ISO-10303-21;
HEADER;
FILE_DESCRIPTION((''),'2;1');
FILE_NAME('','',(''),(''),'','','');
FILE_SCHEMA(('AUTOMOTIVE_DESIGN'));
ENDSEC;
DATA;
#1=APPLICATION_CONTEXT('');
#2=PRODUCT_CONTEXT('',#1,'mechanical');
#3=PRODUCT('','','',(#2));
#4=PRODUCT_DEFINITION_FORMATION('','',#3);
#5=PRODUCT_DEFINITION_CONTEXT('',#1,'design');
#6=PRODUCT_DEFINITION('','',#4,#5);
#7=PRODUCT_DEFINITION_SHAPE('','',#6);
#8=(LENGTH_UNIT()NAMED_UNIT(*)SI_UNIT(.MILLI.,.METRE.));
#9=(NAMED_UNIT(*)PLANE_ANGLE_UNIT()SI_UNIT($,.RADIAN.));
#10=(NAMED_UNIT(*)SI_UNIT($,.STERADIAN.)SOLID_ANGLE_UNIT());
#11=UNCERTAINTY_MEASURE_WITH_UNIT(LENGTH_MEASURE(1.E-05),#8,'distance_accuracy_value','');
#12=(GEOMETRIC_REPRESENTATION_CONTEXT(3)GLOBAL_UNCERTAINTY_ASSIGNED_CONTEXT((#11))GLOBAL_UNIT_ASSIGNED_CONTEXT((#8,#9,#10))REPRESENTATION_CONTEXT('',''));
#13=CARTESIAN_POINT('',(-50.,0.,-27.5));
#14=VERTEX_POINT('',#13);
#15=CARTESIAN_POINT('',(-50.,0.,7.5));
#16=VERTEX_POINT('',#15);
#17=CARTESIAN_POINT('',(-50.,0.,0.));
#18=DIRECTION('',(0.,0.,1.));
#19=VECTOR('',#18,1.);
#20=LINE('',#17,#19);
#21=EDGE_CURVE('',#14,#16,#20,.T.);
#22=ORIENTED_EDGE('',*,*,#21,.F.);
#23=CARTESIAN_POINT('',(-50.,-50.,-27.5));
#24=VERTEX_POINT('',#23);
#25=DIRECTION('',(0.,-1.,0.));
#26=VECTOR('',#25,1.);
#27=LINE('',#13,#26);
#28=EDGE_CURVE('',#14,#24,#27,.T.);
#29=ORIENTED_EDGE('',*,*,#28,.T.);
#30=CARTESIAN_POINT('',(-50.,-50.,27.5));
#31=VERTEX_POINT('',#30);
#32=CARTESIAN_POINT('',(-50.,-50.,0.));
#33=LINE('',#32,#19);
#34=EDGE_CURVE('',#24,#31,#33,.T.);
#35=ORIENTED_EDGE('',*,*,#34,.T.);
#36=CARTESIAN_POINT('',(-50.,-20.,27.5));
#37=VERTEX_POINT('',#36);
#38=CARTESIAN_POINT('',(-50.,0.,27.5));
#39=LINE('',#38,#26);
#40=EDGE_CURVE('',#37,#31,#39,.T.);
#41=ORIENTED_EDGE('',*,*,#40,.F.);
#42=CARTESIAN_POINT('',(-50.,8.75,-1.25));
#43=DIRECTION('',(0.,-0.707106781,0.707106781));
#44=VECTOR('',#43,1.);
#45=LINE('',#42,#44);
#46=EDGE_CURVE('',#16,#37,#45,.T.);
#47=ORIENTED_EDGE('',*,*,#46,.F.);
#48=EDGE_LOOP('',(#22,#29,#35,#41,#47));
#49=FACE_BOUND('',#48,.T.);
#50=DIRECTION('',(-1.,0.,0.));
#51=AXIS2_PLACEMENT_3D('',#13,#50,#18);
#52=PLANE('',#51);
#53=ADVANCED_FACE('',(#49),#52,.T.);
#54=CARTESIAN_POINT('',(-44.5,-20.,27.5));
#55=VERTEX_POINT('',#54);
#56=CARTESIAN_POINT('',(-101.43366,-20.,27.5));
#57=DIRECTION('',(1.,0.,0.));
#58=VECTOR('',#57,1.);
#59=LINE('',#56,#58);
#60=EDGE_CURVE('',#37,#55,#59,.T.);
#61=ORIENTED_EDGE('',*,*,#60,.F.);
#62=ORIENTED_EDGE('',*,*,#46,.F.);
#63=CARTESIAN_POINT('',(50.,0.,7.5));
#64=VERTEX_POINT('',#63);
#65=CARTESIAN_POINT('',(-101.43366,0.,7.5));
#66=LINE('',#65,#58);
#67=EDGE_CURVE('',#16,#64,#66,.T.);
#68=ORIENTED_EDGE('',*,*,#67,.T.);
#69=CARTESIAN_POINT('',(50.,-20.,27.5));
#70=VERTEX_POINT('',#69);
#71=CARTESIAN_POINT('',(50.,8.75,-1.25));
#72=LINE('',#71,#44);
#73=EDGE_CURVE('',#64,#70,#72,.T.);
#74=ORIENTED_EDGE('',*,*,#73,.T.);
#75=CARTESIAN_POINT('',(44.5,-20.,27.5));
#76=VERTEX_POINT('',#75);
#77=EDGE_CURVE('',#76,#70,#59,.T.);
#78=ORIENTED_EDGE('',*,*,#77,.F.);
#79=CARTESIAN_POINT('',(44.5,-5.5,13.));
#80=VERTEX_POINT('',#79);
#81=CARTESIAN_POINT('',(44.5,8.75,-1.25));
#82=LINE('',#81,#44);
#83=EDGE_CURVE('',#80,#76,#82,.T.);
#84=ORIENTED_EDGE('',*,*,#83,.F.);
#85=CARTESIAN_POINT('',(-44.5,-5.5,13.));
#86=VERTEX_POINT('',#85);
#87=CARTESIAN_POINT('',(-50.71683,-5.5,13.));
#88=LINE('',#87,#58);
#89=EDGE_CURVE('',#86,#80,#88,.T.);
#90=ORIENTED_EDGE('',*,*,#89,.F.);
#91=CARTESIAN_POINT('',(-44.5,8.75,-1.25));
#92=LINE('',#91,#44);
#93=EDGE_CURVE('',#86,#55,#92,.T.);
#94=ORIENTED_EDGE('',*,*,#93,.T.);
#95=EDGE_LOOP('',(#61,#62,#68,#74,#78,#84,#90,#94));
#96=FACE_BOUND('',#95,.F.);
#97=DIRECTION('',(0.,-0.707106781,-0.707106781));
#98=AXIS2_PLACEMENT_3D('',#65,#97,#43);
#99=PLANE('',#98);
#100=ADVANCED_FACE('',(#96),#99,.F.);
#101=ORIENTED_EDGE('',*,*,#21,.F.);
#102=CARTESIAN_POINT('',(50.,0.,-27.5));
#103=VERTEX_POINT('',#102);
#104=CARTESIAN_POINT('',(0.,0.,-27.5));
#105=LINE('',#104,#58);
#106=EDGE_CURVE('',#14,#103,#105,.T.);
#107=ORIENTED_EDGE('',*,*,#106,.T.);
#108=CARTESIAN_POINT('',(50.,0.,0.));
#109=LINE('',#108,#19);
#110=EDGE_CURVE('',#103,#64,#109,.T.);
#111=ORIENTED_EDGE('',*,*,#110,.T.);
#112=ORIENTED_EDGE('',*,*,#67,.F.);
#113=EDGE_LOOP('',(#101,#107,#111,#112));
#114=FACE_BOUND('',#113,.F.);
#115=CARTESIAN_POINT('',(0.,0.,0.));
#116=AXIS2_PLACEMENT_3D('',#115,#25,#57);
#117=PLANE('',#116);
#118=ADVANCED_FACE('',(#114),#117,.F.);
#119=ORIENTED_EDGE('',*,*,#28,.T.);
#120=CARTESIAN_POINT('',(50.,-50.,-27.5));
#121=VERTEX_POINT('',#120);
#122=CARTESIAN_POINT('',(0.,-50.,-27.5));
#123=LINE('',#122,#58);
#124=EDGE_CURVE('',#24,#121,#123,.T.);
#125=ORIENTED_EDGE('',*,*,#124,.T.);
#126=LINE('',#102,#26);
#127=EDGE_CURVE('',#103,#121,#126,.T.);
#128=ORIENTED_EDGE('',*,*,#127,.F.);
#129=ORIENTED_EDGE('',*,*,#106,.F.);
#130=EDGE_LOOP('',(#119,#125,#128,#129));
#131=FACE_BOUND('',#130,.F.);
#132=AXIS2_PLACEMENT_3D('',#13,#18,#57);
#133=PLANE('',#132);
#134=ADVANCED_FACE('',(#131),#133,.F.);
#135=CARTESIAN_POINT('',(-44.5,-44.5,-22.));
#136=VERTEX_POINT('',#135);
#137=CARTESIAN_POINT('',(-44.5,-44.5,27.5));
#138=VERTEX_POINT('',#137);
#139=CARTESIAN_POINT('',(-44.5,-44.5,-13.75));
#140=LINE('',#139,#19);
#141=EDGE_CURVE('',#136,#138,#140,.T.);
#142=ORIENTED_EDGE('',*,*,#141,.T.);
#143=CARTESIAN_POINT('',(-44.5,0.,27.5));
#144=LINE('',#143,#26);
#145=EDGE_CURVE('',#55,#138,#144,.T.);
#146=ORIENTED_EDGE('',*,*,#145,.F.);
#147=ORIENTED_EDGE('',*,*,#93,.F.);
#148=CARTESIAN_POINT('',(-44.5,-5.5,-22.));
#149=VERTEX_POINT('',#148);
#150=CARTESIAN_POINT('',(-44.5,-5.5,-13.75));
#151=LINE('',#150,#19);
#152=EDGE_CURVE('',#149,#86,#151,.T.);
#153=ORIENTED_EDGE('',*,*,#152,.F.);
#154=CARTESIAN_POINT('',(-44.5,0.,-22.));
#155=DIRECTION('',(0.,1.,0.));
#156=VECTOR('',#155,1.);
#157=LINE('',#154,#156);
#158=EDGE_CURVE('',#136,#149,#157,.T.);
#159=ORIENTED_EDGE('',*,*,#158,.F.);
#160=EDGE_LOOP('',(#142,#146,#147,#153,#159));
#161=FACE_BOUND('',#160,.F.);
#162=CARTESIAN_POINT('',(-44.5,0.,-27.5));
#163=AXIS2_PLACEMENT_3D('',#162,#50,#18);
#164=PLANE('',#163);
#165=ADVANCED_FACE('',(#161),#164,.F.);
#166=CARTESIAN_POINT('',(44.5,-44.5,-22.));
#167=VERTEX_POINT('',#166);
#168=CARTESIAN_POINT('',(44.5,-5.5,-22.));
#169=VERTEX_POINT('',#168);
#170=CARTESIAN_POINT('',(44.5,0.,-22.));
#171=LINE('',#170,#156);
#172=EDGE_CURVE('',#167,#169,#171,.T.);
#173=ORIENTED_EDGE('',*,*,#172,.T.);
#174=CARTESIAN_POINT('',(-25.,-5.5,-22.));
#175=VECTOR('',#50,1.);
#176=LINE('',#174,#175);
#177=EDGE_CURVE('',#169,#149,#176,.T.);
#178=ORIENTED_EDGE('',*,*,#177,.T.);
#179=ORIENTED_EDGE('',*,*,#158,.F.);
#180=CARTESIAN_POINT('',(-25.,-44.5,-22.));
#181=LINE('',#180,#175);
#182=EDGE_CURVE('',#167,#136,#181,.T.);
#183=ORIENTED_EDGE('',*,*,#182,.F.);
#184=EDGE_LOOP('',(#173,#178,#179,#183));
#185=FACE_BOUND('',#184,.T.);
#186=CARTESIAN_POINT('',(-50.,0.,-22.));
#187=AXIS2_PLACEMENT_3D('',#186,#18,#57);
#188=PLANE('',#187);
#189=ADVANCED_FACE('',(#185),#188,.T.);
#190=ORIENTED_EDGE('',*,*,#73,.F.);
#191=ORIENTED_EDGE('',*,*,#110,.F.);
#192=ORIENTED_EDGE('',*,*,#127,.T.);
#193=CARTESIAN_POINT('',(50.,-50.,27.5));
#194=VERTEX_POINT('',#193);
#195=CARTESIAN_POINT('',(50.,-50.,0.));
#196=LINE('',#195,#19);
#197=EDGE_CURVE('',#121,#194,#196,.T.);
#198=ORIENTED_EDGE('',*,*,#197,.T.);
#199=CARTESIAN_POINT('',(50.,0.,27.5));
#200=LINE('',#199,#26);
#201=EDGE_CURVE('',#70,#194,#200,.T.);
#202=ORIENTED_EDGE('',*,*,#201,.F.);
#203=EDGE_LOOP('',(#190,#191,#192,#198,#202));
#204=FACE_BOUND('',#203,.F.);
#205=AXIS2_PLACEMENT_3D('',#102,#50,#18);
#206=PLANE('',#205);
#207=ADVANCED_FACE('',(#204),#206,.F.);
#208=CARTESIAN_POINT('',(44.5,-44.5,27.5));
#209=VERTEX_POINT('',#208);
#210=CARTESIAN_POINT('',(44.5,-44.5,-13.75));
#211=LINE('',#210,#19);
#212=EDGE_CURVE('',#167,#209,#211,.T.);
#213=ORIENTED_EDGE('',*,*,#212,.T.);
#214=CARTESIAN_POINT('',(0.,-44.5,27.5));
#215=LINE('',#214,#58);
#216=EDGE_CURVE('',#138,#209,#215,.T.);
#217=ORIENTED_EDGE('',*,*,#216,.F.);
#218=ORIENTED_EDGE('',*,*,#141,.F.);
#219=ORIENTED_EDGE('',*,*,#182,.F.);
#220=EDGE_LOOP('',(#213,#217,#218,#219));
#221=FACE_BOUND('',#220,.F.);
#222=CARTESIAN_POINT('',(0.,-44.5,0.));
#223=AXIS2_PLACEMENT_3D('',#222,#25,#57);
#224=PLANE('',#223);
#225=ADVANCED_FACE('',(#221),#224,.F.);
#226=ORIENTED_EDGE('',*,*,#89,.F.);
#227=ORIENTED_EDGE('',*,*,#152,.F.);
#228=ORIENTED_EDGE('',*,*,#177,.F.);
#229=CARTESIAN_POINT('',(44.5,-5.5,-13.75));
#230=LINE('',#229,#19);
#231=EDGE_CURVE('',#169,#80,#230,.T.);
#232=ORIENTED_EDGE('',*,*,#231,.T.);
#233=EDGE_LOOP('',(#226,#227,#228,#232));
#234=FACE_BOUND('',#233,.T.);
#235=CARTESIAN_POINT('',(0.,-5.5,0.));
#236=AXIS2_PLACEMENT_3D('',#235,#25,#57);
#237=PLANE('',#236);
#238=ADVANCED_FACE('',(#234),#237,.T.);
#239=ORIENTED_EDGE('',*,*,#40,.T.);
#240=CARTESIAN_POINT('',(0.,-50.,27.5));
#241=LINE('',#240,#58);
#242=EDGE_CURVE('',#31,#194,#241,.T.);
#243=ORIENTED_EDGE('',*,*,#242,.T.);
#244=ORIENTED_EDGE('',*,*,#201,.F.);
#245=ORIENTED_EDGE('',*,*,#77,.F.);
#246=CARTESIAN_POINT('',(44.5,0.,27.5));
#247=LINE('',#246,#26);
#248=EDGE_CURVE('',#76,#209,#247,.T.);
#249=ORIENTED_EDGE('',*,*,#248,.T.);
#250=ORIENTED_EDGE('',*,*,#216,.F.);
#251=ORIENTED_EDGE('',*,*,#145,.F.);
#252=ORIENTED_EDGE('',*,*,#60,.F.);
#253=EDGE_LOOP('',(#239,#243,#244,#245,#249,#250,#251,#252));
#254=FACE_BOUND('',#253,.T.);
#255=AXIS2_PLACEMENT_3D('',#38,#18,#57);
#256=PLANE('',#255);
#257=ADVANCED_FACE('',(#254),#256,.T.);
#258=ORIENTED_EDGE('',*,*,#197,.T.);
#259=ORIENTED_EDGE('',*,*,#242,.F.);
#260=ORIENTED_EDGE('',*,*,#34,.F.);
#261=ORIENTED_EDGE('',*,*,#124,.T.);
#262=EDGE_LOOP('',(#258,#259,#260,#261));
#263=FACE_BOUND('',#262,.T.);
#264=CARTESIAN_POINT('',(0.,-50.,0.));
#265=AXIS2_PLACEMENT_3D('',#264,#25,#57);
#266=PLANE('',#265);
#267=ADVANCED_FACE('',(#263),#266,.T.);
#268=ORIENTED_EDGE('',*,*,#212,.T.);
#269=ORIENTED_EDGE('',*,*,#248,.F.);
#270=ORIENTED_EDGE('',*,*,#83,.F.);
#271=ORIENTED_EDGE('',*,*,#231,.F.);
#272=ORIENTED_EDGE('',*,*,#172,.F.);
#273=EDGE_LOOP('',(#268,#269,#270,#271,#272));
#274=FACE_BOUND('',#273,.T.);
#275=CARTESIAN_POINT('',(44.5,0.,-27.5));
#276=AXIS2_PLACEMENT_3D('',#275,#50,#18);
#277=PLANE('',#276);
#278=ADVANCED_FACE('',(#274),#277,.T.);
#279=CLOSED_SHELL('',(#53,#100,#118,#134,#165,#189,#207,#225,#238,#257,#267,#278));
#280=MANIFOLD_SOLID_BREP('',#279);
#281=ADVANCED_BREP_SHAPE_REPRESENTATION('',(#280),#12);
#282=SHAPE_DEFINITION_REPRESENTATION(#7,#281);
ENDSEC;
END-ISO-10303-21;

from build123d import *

# Parameters (mm, degrees)
F0_W        = 100
F0_H        = 55
F1_DEPTH    = 50
F2_T        = -5.5
F3_T1_DEPTH = 202.8673195186


# Not quite as in the source:
# - a fillet or chamfer that OpenCascade refuses, or shapes differently, is made with other operations: its cross-section is extruded or revolved along the edge and cut away or added


with BuildPart() as f1:
    # F0 (on Front) → F1 (new body)
    with BuildSketch(Plane.XZ):
        Rectangle(F0_W, F0_H)
    extrude(amount=F1_DEPTH)

    # F2
    f2_openings = [f1.faces().sort_by_distance(p)[0] for p in [
        (0, -25, 27.5),
    ]]
    offset(amount=F2_T, openings=f2_openings)

    # F3: chamfer of 20 on 1 edges, made by hand

    # F3_s2 → F3_t1 (cut)
    with BuildSketch(Plane.YZ.offset(-101.4336597593)):
        Polygon((0, 7.5), (-20, 27.5), (0, 27.5), align=None)
    extrude(amount=F3_T1_DEPTH, mode=Mode.SUBTRACT)


solid = f1.part
